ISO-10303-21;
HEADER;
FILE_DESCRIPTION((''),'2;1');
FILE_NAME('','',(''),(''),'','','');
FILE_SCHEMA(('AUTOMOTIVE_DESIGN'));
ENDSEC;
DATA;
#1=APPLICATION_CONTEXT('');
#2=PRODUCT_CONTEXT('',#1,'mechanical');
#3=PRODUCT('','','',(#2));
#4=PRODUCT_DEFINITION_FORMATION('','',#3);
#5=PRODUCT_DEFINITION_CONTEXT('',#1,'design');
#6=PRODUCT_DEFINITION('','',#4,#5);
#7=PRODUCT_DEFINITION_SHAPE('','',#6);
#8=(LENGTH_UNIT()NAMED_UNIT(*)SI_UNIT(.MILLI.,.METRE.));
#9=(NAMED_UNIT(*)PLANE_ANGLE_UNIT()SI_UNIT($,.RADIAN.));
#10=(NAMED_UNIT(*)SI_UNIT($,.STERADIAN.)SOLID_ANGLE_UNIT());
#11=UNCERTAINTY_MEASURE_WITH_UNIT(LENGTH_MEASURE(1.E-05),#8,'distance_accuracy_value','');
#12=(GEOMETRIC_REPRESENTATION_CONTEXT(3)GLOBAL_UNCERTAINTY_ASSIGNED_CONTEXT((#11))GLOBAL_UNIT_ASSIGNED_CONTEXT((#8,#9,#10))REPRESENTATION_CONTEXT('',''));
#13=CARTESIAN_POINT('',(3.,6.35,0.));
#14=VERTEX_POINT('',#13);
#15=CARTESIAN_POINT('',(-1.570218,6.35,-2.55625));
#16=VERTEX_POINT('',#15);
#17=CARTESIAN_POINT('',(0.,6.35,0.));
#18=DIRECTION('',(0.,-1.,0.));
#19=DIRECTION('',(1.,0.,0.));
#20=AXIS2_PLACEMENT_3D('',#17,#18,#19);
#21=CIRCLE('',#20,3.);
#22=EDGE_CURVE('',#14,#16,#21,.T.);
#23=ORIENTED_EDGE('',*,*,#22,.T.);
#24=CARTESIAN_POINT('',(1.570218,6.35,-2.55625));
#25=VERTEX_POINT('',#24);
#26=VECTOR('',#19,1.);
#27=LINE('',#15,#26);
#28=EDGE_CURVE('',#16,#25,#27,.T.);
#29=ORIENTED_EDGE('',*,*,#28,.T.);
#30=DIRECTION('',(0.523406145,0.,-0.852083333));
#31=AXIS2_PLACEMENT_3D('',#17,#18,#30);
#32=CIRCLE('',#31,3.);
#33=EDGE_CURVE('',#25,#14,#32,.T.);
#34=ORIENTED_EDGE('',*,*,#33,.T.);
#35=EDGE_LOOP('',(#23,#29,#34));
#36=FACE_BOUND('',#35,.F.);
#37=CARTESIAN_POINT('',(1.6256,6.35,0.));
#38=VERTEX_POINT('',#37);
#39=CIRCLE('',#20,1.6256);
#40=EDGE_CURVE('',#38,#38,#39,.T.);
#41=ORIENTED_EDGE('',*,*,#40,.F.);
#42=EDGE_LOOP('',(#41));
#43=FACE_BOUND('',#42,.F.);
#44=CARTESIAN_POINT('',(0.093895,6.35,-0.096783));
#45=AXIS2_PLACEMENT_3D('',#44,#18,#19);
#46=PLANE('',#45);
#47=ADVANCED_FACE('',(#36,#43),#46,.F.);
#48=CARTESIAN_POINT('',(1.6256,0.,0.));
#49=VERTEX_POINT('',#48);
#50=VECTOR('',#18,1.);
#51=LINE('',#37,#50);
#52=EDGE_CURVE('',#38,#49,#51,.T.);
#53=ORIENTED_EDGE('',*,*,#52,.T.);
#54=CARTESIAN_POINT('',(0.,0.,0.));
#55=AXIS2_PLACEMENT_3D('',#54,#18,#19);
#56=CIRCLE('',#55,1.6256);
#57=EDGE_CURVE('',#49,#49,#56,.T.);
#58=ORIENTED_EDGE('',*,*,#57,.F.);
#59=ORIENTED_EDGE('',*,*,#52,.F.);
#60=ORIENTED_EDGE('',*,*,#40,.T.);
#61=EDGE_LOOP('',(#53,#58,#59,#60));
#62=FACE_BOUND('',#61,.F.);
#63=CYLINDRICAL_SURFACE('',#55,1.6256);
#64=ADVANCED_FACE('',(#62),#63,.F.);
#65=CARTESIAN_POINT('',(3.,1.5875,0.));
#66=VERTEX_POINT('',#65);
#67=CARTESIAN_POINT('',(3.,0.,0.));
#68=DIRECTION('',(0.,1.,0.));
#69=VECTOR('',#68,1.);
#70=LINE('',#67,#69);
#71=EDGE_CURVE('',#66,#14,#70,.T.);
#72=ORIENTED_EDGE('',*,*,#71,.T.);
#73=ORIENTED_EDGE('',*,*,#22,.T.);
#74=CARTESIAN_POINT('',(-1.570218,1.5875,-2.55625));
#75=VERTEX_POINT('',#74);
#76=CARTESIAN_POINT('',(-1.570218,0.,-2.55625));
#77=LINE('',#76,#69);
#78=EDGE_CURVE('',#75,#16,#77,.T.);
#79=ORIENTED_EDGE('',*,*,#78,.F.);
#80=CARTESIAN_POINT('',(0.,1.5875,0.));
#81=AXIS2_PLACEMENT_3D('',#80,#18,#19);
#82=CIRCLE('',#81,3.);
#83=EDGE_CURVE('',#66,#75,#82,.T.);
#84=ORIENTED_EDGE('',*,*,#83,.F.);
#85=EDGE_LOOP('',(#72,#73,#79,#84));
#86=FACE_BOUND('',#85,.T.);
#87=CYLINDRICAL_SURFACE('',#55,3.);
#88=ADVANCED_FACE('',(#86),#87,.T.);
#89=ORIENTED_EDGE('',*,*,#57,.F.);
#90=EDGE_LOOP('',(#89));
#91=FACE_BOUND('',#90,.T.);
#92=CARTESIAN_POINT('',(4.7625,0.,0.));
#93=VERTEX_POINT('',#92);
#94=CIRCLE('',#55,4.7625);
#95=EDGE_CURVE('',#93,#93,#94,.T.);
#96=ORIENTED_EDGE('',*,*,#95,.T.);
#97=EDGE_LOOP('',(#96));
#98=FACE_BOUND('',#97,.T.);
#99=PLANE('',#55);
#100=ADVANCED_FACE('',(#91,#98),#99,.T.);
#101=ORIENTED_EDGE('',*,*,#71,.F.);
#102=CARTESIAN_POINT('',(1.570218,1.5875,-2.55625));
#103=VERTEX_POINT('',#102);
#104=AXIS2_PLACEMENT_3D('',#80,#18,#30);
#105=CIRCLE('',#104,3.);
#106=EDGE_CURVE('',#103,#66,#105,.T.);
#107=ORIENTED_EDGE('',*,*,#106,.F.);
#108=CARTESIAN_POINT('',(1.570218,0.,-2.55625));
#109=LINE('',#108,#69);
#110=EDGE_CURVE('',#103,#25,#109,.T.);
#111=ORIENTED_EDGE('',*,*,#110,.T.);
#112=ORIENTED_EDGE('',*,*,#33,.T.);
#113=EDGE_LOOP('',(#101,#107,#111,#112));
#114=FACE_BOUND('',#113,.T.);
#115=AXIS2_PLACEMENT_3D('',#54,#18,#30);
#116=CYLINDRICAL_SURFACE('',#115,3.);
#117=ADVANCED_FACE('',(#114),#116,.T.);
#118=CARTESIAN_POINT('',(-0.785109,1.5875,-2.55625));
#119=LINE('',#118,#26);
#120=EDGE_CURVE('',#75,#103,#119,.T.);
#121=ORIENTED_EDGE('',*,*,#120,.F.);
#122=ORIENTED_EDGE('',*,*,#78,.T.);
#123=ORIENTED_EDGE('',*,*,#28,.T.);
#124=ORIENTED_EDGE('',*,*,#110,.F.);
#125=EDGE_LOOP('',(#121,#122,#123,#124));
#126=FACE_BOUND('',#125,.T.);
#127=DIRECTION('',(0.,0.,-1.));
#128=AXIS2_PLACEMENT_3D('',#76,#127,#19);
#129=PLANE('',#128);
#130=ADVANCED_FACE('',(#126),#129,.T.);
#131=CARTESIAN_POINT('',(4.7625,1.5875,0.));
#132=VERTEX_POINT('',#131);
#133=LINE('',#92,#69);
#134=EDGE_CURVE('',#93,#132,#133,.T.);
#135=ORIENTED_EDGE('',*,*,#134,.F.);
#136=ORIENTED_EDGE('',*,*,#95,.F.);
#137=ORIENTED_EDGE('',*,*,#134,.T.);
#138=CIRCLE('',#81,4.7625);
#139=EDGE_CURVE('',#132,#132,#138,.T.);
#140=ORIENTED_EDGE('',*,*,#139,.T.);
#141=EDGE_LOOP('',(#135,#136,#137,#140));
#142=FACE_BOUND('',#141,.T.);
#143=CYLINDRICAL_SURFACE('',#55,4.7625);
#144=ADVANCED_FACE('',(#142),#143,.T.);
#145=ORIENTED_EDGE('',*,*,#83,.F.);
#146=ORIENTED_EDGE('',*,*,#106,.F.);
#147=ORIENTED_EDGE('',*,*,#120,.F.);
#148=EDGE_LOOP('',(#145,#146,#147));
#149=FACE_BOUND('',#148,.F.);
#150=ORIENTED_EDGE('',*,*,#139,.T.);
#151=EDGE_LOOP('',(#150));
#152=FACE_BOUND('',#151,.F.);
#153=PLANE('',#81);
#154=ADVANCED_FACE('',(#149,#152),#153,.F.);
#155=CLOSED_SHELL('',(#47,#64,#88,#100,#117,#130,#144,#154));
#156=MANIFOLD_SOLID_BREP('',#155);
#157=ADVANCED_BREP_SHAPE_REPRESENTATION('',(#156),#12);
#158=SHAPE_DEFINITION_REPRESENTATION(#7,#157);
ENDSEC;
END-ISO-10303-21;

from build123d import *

# Parameters (mm, degrees)
F0_R     = 4.7625
F0_R_2   = 1.6256
F1_DEPTH = 1.5875
F2_DEPTH = 6.35


with BuildPart() as f1:
    # F0 (on Front) → F1 (new body)
    with BuildSketch(Plane.XZ):
        Circle(F0_R)
        with BuildLine():
            ThreePointArc((-1.5702184362, -2.55625), (-1.464469988, 2.6182680639), (3, 0))
            ThreePointArc((3, 0), (2.6182680639, -1.464469988), (1.5702184362, -2.55625))
            ThreePointArc((1.5702184362, -2.55625), (0, -3), (-1.5702184362, -2.55625))
        make_face(mode=Mode.SUBTRACT)
        with BuildLine():
            ThreePointArc((1.5702184362, -2.55625), (2.6182680639, -1.464469988), (3, 0))
            ThreePointArc((3, 0), (-1.464469988, 2.6182680639), (-1.5702184362, -2.55625))
            Line((-1.5702184362, -2.55625), (0, -2.55625))
            Line((0, -2.55625), (1.5702184362, -2.55625))
        make_face()
        Circle(F0_R_2, mode=Mode.SUBTRACT)
        with BuildLine():
            Line((0, -2.55625), (-1.5702184362, -2.55625))
            ThreePointArc((-1.5702184362, -2.55625), (0, -3), (1.5702184362, -2.55625))
            Line((1.5702184362, -2.55625), (0, -2.55625))
        make_face()
    extrude(amount=-F1_DEPTH)

    # F0 (on Front) → F2 (join)
    with BuildSketch(Plane.XZ):
        with BuildLine():
            ThreePointArc((1.5702184362, -2.55625), (2.6182680639, -1.464469988), (3, 0))
            ThreePointArc((3, 0), (-1.464469988, 2.6182680639), (-1.5702184362, -2.55625))
            Line((-1.5702184362, -2.55625), (0, -2.55625))
            Line((0, -2.55625), (1.5702184362, -2.55625))
        make_face()
        Circle(F0_R_2, mode=Mode.SUBTRACT)
    extrude(amount=-F2_DEPTH)


solid = f1.part
